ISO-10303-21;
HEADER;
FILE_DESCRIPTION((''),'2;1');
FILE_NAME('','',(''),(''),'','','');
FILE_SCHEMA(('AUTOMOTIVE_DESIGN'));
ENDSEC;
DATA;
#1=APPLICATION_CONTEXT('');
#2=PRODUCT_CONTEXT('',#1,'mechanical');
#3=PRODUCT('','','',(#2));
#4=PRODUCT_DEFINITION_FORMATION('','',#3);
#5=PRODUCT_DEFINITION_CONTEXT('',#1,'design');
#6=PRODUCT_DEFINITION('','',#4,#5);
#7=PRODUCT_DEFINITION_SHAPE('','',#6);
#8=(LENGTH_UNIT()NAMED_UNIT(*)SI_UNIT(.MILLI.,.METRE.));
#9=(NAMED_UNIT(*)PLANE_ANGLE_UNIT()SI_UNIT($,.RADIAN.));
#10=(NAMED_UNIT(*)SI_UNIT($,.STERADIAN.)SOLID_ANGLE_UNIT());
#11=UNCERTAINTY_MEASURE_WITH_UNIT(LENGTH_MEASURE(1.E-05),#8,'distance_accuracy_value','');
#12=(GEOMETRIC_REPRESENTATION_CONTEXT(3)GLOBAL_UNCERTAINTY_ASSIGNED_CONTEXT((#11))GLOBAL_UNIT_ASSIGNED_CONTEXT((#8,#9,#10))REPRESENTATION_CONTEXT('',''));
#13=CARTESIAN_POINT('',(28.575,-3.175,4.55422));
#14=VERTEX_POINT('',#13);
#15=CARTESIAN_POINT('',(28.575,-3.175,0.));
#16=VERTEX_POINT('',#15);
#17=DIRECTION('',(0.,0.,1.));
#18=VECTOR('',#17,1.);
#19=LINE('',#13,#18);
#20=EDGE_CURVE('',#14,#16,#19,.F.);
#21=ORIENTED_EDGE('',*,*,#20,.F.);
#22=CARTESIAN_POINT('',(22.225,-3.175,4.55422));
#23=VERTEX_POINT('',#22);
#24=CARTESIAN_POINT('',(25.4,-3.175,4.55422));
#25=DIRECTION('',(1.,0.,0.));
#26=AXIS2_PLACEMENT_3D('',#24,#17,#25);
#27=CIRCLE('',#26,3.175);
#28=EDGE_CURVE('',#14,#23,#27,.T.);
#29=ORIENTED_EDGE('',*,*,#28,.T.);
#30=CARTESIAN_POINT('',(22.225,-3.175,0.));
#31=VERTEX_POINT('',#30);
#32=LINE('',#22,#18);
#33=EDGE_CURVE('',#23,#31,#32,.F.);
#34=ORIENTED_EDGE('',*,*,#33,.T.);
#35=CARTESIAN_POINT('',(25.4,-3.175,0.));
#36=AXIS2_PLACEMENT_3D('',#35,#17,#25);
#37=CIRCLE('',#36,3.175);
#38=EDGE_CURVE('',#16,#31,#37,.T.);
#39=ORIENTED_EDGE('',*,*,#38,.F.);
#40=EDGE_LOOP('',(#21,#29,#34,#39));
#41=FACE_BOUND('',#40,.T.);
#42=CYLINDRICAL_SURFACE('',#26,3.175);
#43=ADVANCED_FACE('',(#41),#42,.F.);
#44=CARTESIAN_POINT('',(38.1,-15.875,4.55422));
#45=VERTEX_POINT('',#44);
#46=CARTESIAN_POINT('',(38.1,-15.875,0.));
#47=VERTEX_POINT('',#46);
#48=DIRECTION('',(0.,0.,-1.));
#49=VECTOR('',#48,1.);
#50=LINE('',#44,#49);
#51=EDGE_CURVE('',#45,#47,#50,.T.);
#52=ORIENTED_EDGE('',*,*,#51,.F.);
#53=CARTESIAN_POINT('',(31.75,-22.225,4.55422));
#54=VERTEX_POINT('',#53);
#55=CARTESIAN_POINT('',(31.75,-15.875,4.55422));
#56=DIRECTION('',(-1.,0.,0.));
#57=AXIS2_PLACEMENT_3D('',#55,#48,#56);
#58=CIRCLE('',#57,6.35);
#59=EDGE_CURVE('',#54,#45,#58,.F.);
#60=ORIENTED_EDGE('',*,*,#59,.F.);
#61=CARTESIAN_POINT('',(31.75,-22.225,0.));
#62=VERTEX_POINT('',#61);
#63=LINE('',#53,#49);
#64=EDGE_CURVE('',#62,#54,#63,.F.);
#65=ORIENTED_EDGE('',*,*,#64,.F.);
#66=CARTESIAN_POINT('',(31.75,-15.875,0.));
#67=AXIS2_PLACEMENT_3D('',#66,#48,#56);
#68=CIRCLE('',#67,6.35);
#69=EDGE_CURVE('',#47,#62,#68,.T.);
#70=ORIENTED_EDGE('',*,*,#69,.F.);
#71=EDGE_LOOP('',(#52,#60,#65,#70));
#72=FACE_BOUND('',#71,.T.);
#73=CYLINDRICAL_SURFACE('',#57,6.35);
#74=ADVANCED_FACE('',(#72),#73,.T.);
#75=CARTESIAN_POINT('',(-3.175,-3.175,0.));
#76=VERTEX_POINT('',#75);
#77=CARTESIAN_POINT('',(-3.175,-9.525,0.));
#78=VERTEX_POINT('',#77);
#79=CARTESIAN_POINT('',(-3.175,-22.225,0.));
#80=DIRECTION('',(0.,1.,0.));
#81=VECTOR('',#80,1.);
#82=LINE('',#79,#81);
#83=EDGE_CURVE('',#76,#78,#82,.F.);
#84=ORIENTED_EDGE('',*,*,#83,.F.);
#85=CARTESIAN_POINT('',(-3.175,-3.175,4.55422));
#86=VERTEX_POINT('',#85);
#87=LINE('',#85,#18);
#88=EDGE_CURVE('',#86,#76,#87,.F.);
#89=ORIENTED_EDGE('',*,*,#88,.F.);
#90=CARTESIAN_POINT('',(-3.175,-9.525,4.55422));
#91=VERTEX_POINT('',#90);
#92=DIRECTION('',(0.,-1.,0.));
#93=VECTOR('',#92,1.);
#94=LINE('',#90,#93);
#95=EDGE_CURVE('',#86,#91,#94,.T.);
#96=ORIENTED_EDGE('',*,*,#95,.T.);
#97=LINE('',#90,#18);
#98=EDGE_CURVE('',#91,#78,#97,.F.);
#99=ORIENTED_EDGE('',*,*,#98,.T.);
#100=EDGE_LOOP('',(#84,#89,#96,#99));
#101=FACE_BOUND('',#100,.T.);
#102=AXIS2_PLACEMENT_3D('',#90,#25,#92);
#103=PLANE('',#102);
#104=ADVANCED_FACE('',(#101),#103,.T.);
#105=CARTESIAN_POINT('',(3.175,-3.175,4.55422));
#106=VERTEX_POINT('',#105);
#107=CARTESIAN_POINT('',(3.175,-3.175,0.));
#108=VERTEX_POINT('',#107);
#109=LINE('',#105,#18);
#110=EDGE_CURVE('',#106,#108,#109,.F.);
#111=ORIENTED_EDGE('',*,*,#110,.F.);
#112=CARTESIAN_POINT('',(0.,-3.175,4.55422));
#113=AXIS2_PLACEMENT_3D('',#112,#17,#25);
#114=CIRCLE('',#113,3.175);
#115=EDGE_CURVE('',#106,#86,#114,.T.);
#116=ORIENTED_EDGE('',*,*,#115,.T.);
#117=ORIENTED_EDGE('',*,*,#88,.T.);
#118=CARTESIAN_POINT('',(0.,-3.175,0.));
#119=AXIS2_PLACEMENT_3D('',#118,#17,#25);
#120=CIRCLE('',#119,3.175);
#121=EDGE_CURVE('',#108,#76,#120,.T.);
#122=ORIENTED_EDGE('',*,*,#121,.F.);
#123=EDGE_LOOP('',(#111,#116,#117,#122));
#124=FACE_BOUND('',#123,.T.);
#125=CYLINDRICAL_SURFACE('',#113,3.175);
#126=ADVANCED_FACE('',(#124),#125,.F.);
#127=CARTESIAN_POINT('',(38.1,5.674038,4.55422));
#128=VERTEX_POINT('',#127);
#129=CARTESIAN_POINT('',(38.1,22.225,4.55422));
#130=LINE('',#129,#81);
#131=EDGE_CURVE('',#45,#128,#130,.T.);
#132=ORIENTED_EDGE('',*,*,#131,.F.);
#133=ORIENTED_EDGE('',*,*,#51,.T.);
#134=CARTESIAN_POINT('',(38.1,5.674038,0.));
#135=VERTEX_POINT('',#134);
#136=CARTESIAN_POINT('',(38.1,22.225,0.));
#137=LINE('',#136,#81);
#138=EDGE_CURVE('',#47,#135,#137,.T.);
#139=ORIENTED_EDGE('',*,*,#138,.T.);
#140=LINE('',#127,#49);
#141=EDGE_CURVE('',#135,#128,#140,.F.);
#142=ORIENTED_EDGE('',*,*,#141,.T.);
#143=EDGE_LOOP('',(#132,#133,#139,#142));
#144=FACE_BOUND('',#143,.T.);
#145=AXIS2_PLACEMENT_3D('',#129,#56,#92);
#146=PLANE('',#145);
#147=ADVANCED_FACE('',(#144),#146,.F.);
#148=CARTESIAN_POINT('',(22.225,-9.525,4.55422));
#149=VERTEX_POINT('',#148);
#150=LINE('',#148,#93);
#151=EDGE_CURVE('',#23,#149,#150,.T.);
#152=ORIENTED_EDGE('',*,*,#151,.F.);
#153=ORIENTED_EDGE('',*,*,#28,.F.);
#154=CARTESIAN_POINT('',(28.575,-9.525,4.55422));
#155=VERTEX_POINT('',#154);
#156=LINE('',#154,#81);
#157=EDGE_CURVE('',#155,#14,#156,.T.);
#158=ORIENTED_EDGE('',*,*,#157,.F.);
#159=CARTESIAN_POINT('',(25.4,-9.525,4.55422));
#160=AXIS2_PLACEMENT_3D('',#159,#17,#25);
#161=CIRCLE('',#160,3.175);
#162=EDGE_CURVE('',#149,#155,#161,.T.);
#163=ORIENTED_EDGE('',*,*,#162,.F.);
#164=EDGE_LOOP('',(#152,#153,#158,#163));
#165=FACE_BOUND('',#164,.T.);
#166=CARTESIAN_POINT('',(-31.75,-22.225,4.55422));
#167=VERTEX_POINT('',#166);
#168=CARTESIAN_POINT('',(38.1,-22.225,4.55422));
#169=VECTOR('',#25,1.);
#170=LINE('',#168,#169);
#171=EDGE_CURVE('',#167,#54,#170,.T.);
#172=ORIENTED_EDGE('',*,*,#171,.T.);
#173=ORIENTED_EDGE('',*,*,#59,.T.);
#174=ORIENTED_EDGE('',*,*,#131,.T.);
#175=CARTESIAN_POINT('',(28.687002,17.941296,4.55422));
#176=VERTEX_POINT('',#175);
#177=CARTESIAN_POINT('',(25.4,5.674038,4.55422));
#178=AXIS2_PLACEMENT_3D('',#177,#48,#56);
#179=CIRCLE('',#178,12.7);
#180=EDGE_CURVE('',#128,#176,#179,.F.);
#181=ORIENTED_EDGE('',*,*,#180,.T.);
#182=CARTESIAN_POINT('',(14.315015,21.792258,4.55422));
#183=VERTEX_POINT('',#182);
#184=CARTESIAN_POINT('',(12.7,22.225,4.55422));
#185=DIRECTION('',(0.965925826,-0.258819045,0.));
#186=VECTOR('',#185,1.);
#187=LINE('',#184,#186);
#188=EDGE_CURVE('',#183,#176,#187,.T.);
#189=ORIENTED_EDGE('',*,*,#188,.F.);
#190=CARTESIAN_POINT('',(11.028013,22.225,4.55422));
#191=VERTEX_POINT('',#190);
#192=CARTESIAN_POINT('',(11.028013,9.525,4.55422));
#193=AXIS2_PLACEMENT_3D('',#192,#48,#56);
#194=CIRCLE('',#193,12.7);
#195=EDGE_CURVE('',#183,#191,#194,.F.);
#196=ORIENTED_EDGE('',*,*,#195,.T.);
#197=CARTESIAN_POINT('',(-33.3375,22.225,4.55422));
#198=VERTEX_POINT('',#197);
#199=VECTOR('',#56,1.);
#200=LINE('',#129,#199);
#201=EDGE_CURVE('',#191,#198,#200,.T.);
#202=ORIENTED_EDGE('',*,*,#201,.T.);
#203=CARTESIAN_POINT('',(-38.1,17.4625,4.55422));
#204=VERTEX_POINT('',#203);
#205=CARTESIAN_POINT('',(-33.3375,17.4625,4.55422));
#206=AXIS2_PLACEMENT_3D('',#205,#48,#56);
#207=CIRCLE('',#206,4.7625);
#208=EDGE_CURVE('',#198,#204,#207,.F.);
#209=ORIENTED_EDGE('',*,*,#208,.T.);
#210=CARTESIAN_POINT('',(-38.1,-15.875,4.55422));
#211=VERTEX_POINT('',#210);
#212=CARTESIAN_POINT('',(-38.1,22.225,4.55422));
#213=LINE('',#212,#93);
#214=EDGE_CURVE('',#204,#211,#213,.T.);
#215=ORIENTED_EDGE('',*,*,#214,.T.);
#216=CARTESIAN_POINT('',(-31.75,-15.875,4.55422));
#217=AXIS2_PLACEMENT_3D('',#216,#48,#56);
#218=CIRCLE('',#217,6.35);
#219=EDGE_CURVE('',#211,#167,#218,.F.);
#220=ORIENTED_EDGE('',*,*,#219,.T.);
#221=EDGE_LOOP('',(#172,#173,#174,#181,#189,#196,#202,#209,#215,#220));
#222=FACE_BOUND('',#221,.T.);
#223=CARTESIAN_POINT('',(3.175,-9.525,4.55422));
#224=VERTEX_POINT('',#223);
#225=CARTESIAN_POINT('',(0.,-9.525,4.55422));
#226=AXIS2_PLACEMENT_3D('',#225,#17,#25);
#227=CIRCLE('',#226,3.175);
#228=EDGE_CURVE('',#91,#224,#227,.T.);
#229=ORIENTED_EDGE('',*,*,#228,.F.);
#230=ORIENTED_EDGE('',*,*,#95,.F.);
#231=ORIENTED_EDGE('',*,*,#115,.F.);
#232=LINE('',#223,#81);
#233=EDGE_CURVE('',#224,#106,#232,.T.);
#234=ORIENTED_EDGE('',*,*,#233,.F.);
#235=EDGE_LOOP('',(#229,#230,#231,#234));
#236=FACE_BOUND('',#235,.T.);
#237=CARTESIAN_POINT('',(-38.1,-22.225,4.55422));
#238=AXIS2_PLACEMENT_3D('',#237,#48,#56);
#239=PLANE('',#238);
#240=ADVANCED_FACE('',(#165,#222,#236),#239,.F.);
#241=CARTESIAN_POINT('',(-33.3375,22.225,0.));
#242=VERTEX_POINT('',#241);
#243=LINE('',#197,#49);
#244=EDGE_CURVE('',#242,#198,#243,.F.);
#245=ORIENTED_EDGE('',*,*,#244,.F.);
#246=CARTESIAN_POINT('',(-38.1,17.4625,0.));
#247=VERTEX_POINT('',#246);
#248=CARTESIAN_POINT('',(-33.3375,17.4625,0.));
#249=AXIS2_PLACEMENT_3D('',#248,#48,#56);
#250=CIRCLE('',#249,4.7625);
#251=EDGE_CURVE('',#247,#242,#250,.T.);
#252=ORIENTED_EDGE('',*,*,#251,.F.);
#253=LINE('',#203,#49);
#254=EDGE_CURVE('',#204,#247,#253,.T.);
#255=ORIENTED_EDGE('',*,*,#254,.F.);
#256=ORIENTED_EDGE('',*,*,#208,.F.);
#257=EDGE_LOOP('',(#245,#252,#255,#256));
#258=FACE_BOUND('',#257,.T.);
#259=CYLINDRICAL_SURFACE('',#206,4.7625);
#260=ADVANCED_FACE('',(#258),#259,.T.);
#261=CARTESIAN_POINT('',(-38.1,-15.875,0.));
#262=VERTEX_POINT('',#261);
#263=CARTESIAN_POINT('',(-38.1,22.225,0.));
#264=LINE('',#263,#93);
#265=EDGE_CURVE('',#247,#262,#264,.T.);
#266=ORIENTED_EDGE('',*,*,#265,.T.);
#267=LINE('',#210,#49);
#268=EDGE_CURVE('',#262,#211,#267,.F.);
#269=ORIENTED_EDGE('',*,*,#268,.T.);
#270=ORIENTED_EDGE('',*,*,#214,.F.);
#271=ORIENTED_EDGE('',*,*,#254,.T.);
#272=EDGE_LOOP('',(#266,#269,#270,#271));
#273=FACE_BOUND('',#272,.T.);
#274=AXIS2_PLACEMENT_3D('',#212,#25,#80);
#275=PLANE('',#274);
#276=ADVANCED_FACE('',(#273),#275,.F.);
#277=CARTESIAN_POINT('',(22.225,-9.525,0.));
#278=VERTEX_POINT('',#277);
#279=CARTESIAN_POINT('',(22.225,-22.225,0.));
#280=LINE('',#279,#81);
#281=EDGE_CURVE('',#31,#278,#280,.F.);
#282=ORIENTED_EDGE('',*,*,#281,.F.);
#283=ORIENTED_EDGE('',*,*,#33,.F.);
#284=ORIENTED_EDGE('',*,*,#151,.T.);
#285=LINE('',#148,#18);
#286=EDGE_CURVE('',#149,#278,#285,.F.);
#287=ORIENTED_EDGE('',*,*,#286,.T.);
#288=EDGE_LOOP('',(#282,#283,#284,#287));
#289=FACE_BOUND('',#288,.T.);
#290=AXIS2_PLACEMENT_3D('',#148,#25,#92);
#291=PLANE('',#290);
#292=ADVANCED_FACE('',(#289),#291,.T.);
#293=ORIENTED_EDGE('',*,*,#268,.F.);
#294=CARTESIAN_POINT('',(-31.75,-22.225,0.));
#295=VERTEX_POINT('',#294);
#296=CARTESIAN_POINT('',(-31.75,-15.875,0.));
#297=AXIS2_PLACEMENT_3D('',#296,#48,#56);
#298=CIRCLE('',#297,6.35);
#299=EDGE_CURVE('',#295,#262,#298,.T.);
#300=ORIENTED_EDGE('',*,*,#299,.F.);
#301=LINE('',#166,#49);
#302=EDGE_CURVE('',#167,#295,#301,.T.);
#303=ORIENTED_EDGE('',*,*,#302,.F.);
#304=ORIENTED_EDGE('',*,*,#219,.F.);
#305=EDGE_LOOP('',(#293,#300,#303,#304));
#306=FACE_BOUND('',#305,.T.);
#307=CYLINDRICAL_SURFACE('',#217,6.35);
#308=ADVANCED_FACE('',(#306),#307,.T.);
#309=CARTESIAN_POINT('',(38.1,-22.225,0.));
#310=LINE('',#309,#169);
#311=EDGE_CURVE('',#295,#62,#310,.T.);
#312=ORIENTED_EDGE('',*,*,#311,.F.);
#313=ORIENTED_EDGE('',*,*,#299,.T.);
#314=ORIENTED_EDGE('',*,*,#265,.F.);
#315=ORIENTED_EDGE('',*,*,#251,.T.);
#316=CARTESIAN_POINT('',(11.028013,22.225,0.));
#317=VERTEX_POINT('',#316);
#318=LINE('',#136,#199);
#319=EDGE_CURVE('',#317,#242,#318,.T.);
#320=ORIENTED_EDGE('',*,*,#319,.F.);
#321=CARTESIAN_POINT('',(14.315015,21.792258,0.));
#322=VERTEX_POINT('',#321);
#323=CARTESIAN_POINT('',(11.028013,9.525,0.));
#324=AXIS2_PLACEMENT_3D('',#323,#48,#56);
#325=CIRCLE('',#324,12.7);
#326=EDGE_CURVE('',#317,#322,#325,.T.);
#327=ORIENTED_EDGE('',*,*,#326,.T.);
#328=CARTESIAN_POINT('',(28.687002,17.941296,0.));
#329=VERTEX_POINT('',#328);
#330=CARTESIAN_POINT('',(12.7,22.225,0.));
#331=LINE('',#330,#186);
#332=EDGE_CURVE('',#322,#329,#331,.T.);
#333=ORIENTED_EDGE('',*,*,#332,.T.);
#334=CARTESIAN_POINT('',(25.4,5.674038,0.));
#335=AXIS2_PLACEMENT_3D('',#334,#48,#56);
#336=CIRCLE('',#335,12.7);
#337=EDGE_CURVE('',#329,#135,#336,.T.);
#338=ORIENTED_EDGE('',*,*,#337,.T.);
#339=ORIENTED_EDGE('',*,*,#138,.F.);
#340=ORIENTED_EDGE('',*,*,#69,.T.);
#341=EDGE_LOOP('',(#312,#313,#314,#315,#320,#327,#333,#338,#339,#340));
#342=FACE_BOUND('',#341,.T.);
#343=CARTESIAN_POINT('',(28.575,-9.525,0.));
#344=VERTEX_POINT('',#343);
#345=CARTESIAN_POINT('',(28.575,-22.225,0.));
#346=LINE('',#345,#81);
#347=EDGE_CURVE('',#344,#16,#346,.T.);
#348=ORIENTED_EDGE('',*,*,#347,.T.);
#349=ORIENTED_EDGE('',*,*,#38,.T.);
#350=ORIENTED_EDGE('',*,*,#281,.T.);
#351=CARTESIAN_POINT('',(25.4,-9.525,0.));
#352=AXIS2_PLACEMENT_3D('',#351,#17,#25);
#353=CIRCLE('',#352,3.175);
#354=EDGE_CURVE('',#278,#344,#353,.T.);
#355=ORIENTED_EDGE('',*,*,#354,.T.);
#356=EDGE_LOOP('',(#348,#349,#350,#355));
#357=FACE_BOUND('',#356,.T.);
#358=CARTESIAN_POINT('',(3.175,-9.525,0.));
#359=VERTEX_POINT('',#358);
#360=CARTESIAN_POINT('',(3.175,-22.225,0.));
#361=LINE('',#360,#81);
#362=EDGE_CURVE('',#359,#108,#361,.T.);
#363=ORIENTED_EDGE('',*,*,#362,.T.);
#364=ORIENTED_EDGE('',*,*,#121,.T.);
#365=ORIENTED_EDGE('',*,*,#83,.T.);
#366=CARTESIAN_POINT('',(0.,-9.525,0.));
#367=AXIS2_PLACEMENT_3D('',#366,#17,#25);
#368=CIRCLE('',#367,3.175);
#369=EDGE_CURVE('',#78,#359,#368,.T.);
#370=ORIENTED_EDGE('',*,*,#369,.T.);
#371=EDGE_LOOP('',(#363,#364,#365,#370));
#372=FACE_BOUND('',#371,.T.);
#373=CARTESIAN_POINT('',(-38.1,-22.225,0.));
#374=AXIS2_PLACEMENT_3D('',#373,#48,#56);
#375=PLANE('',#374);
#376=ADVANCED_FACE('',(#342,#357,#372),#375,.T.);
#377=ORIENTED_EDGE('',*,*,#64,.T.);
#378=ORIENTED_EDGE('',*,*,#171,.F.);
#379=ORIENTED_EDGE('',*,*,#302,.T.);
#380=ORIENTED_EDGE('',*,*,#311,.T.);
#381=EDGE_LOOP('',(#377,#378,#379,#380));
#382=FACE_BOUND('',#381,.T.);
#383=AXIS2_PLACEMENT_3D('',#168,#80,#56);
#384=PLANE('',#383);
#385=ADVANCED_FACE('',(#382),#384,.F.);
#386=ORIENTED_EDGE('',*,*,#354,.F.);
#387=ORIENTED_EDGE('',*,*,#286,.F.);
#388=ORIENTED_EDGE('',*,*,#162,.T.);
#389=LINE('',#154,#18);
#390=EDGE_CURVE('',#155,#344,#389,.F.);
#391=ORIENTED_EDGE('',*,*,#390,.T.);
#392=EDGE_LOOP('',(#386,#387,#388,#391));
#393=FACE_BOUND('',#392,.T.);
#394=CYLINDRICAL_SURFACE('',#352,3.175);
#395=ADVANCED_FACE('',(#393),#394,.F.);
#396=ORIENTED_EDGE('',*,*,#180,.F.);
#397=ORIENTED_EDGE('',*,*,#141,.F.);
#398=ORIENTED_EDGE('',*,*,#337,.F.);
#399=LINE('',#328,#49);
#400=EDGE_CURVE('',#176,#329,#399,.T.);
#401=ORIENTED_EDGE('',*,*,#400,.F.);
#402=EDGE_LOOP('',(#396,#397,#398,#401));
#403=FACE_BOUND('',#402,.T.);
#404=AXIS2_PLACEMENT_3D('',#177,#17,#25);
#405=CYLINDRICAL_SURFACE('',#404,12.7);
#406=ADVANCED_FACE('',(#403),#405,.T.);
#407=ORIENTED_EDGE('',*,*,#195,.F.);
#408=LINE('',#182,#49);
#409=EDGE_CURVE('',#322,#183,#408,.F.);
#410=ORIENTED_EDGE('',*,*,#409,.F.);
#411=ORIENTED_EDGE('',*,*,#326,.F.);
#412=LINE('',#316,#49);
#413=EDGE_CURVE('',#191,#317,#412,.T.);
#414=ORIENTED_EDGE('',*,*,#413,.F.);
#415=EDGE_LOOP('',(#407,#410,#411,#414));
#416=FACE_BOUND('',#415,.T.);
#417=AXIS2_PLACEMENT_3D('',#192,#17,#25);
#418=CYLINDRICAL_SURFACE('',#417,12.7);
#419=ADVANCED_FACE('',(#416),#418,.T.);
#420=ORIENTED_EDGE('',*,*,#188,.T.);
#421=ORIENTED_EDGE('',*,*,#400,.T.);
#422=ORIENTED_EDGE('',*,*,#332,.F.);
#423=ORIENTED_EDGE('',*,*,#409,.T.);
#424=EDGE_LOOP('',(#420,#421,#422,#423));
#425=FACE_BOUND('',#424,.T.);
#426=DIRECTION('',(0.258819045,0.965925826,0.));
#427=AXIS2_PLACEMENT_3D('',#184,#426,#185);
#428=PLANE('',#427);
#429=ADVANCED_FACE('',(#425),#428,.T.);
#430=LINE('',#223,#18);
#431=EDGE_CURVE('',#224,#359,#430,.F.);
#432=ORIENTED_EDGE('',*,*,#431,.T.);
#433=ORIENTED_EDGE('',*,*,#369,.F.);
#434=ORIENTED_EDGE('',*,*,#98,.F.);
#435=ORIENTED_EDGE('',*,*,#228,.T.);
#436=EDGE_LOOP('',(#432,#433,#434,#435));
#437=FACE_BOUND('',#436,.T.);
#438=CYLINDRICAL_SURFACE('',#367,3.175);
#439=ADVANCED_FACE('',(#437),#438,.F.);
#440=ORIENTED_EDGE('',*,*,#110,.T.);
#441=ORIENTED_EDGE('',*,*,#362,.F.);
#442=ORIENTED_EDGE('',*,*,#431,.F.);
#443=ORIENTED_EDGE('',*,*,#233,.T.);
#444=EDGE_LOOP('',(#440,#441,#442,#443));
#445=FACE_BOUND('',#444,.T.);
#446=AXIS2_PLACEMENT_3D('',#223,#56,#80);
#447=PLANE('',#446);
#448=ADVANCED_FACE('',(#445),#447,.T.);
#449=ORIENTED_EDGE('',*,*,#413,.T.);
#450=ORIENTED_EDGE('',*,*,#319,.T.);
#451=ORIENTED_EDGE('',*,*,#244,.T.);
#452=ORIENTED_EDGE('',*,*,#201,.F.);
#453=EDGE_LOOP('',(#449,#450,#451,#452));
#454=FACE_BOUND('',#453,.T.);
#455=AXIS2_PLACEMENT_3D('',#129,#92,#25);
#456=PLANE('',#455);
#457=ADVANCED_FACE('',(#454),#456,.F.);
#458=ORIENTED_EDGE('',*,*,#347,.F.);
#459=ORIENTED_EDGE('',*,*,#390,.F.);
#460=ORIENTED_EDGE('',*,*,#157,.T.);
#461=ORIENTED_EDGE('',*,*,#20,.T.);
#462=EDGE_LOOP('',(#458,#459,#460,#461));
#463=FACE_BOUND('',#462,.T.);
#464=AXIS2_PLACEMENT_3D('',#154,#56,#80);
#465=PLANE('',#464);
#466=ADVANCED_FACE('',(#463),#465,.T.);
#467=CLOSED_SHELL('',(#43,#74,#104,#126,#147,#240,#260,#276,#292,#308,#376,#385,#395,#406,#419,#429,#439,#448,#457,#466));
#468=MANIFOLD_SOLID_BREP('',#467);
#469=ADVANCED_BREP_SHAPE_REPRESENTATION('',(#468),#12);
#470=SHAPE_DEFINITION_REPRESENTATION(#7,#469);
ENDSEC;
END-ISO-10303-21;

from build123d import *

# Parameters (mm, degrees)
SKETCH1_W          = 76.2
SKETCH1_H          = 44.45
BASE_FLANGE1_DEPTH = 4.55422
CUT_EXTRUDE1_DEPTH = 45.342998825
FILLET1_R          = 4.7625
FILLET2_R          = 12.7
SKETCH3_R          = 3.175
CUT_EXTRUDE2_DEPTH = 45.342998825
FILLET3_R          = 6.35
CUT_EXTRUDE3_DEPTH = 45.342998825


# Sheet-metal steps are written as plain solids
with BuildPart() as part:
    # Sketch1 → Base-Flange1 (new body)
    with BuildSketch(Plane.XY):
        Rectangle(SKETCH1_W, SKETCH1_H)
    extrude(amount=BASE_FLANGE1_DEPTH)

    # Sketch2 → Cut-Extrude1 (cut, through all)
    with BuildSketch(Plane.XY.offset(4.55422)):
        Polygon((12.7, 22.225), (38.1, 15.419090512), (38.1, 22.225), align=None)
    extrude(amount=-CUT_EXTRUDE1_DEPTH, mode=Mode.SUBTRACT)

    # Fillet1
    fillet1_edges = [part.edges().sort_by_distance(p)[0] for p in [
        (-38.1, 22.225, 2.27711),
    ]]
    fillet(fillet1_edges, radius=FILLET1_R)

    # Fillet2
    fillet2_edges = [part.edges().sort_by_distance(p)[0] for p in [
        (12.7, 22.225, 2.27711),
        (38.1, 15.419090512, 2.27711),
    ]]
    fillet(fillet2_edges, radius=FILLET2_R)

    # Sketch3 → Cut-Extrude2 (cut, through all)
    with BuildSketch(Plane.XY.offset(4.55422)):
        with Locations((0, -9.525)):
            Circle(SKETCH3_R)
        with Locations((25.4, -9.525)):
            Circle(SKETCH3_R)
    extrude(amount=-CUT_EXTRUDE2_DEPTH, mode=Mode.SUBTRACT)

    # Fillet3
    fillet3_edges = [part.edges().sort_by_distance(p)[0] for p in [
        (38.1, -22.225, 2.27711),
        (-38.1, -22.225, 2.27711),
    ]]
    fillet(fillet3_edges, radius=FILLET3_R)

    # Sketch4 → Cut-Extrude3 (cut, through all)
    with BuildSketch(Plane.XY.offset(4.55422)):
        with BuildLine():
            Line((-3.175, -9.525), (-3.175, -3.175))
            ThreePointArc((-3.175, -3.175), (0, 0), (3.175, -3.175))
            Line((3.175, -3.175), (3.175, -9.525))
            ThreePointArc((3.175, -9.525), (0, -12.7), (-3.175, -9.525))
        make_face()
        with BuildLine():
            Line((22.225, -9.525), (22.225, -3.175))
            ThreePointArc((22.225, -3.175), (25.4, 0), (28.575, -3.175))
            Line((28.575, -3.175), (28.575, -9.525))
            ThreePointArc((28.575, -9.525), (25.4, -12.7), (22.225, -9.525))
        make_face()
    extrude(amount=-CUT_EXTRUDE3_DEPTH, mode=Mode.SUBTRACT)


solid = part.part
